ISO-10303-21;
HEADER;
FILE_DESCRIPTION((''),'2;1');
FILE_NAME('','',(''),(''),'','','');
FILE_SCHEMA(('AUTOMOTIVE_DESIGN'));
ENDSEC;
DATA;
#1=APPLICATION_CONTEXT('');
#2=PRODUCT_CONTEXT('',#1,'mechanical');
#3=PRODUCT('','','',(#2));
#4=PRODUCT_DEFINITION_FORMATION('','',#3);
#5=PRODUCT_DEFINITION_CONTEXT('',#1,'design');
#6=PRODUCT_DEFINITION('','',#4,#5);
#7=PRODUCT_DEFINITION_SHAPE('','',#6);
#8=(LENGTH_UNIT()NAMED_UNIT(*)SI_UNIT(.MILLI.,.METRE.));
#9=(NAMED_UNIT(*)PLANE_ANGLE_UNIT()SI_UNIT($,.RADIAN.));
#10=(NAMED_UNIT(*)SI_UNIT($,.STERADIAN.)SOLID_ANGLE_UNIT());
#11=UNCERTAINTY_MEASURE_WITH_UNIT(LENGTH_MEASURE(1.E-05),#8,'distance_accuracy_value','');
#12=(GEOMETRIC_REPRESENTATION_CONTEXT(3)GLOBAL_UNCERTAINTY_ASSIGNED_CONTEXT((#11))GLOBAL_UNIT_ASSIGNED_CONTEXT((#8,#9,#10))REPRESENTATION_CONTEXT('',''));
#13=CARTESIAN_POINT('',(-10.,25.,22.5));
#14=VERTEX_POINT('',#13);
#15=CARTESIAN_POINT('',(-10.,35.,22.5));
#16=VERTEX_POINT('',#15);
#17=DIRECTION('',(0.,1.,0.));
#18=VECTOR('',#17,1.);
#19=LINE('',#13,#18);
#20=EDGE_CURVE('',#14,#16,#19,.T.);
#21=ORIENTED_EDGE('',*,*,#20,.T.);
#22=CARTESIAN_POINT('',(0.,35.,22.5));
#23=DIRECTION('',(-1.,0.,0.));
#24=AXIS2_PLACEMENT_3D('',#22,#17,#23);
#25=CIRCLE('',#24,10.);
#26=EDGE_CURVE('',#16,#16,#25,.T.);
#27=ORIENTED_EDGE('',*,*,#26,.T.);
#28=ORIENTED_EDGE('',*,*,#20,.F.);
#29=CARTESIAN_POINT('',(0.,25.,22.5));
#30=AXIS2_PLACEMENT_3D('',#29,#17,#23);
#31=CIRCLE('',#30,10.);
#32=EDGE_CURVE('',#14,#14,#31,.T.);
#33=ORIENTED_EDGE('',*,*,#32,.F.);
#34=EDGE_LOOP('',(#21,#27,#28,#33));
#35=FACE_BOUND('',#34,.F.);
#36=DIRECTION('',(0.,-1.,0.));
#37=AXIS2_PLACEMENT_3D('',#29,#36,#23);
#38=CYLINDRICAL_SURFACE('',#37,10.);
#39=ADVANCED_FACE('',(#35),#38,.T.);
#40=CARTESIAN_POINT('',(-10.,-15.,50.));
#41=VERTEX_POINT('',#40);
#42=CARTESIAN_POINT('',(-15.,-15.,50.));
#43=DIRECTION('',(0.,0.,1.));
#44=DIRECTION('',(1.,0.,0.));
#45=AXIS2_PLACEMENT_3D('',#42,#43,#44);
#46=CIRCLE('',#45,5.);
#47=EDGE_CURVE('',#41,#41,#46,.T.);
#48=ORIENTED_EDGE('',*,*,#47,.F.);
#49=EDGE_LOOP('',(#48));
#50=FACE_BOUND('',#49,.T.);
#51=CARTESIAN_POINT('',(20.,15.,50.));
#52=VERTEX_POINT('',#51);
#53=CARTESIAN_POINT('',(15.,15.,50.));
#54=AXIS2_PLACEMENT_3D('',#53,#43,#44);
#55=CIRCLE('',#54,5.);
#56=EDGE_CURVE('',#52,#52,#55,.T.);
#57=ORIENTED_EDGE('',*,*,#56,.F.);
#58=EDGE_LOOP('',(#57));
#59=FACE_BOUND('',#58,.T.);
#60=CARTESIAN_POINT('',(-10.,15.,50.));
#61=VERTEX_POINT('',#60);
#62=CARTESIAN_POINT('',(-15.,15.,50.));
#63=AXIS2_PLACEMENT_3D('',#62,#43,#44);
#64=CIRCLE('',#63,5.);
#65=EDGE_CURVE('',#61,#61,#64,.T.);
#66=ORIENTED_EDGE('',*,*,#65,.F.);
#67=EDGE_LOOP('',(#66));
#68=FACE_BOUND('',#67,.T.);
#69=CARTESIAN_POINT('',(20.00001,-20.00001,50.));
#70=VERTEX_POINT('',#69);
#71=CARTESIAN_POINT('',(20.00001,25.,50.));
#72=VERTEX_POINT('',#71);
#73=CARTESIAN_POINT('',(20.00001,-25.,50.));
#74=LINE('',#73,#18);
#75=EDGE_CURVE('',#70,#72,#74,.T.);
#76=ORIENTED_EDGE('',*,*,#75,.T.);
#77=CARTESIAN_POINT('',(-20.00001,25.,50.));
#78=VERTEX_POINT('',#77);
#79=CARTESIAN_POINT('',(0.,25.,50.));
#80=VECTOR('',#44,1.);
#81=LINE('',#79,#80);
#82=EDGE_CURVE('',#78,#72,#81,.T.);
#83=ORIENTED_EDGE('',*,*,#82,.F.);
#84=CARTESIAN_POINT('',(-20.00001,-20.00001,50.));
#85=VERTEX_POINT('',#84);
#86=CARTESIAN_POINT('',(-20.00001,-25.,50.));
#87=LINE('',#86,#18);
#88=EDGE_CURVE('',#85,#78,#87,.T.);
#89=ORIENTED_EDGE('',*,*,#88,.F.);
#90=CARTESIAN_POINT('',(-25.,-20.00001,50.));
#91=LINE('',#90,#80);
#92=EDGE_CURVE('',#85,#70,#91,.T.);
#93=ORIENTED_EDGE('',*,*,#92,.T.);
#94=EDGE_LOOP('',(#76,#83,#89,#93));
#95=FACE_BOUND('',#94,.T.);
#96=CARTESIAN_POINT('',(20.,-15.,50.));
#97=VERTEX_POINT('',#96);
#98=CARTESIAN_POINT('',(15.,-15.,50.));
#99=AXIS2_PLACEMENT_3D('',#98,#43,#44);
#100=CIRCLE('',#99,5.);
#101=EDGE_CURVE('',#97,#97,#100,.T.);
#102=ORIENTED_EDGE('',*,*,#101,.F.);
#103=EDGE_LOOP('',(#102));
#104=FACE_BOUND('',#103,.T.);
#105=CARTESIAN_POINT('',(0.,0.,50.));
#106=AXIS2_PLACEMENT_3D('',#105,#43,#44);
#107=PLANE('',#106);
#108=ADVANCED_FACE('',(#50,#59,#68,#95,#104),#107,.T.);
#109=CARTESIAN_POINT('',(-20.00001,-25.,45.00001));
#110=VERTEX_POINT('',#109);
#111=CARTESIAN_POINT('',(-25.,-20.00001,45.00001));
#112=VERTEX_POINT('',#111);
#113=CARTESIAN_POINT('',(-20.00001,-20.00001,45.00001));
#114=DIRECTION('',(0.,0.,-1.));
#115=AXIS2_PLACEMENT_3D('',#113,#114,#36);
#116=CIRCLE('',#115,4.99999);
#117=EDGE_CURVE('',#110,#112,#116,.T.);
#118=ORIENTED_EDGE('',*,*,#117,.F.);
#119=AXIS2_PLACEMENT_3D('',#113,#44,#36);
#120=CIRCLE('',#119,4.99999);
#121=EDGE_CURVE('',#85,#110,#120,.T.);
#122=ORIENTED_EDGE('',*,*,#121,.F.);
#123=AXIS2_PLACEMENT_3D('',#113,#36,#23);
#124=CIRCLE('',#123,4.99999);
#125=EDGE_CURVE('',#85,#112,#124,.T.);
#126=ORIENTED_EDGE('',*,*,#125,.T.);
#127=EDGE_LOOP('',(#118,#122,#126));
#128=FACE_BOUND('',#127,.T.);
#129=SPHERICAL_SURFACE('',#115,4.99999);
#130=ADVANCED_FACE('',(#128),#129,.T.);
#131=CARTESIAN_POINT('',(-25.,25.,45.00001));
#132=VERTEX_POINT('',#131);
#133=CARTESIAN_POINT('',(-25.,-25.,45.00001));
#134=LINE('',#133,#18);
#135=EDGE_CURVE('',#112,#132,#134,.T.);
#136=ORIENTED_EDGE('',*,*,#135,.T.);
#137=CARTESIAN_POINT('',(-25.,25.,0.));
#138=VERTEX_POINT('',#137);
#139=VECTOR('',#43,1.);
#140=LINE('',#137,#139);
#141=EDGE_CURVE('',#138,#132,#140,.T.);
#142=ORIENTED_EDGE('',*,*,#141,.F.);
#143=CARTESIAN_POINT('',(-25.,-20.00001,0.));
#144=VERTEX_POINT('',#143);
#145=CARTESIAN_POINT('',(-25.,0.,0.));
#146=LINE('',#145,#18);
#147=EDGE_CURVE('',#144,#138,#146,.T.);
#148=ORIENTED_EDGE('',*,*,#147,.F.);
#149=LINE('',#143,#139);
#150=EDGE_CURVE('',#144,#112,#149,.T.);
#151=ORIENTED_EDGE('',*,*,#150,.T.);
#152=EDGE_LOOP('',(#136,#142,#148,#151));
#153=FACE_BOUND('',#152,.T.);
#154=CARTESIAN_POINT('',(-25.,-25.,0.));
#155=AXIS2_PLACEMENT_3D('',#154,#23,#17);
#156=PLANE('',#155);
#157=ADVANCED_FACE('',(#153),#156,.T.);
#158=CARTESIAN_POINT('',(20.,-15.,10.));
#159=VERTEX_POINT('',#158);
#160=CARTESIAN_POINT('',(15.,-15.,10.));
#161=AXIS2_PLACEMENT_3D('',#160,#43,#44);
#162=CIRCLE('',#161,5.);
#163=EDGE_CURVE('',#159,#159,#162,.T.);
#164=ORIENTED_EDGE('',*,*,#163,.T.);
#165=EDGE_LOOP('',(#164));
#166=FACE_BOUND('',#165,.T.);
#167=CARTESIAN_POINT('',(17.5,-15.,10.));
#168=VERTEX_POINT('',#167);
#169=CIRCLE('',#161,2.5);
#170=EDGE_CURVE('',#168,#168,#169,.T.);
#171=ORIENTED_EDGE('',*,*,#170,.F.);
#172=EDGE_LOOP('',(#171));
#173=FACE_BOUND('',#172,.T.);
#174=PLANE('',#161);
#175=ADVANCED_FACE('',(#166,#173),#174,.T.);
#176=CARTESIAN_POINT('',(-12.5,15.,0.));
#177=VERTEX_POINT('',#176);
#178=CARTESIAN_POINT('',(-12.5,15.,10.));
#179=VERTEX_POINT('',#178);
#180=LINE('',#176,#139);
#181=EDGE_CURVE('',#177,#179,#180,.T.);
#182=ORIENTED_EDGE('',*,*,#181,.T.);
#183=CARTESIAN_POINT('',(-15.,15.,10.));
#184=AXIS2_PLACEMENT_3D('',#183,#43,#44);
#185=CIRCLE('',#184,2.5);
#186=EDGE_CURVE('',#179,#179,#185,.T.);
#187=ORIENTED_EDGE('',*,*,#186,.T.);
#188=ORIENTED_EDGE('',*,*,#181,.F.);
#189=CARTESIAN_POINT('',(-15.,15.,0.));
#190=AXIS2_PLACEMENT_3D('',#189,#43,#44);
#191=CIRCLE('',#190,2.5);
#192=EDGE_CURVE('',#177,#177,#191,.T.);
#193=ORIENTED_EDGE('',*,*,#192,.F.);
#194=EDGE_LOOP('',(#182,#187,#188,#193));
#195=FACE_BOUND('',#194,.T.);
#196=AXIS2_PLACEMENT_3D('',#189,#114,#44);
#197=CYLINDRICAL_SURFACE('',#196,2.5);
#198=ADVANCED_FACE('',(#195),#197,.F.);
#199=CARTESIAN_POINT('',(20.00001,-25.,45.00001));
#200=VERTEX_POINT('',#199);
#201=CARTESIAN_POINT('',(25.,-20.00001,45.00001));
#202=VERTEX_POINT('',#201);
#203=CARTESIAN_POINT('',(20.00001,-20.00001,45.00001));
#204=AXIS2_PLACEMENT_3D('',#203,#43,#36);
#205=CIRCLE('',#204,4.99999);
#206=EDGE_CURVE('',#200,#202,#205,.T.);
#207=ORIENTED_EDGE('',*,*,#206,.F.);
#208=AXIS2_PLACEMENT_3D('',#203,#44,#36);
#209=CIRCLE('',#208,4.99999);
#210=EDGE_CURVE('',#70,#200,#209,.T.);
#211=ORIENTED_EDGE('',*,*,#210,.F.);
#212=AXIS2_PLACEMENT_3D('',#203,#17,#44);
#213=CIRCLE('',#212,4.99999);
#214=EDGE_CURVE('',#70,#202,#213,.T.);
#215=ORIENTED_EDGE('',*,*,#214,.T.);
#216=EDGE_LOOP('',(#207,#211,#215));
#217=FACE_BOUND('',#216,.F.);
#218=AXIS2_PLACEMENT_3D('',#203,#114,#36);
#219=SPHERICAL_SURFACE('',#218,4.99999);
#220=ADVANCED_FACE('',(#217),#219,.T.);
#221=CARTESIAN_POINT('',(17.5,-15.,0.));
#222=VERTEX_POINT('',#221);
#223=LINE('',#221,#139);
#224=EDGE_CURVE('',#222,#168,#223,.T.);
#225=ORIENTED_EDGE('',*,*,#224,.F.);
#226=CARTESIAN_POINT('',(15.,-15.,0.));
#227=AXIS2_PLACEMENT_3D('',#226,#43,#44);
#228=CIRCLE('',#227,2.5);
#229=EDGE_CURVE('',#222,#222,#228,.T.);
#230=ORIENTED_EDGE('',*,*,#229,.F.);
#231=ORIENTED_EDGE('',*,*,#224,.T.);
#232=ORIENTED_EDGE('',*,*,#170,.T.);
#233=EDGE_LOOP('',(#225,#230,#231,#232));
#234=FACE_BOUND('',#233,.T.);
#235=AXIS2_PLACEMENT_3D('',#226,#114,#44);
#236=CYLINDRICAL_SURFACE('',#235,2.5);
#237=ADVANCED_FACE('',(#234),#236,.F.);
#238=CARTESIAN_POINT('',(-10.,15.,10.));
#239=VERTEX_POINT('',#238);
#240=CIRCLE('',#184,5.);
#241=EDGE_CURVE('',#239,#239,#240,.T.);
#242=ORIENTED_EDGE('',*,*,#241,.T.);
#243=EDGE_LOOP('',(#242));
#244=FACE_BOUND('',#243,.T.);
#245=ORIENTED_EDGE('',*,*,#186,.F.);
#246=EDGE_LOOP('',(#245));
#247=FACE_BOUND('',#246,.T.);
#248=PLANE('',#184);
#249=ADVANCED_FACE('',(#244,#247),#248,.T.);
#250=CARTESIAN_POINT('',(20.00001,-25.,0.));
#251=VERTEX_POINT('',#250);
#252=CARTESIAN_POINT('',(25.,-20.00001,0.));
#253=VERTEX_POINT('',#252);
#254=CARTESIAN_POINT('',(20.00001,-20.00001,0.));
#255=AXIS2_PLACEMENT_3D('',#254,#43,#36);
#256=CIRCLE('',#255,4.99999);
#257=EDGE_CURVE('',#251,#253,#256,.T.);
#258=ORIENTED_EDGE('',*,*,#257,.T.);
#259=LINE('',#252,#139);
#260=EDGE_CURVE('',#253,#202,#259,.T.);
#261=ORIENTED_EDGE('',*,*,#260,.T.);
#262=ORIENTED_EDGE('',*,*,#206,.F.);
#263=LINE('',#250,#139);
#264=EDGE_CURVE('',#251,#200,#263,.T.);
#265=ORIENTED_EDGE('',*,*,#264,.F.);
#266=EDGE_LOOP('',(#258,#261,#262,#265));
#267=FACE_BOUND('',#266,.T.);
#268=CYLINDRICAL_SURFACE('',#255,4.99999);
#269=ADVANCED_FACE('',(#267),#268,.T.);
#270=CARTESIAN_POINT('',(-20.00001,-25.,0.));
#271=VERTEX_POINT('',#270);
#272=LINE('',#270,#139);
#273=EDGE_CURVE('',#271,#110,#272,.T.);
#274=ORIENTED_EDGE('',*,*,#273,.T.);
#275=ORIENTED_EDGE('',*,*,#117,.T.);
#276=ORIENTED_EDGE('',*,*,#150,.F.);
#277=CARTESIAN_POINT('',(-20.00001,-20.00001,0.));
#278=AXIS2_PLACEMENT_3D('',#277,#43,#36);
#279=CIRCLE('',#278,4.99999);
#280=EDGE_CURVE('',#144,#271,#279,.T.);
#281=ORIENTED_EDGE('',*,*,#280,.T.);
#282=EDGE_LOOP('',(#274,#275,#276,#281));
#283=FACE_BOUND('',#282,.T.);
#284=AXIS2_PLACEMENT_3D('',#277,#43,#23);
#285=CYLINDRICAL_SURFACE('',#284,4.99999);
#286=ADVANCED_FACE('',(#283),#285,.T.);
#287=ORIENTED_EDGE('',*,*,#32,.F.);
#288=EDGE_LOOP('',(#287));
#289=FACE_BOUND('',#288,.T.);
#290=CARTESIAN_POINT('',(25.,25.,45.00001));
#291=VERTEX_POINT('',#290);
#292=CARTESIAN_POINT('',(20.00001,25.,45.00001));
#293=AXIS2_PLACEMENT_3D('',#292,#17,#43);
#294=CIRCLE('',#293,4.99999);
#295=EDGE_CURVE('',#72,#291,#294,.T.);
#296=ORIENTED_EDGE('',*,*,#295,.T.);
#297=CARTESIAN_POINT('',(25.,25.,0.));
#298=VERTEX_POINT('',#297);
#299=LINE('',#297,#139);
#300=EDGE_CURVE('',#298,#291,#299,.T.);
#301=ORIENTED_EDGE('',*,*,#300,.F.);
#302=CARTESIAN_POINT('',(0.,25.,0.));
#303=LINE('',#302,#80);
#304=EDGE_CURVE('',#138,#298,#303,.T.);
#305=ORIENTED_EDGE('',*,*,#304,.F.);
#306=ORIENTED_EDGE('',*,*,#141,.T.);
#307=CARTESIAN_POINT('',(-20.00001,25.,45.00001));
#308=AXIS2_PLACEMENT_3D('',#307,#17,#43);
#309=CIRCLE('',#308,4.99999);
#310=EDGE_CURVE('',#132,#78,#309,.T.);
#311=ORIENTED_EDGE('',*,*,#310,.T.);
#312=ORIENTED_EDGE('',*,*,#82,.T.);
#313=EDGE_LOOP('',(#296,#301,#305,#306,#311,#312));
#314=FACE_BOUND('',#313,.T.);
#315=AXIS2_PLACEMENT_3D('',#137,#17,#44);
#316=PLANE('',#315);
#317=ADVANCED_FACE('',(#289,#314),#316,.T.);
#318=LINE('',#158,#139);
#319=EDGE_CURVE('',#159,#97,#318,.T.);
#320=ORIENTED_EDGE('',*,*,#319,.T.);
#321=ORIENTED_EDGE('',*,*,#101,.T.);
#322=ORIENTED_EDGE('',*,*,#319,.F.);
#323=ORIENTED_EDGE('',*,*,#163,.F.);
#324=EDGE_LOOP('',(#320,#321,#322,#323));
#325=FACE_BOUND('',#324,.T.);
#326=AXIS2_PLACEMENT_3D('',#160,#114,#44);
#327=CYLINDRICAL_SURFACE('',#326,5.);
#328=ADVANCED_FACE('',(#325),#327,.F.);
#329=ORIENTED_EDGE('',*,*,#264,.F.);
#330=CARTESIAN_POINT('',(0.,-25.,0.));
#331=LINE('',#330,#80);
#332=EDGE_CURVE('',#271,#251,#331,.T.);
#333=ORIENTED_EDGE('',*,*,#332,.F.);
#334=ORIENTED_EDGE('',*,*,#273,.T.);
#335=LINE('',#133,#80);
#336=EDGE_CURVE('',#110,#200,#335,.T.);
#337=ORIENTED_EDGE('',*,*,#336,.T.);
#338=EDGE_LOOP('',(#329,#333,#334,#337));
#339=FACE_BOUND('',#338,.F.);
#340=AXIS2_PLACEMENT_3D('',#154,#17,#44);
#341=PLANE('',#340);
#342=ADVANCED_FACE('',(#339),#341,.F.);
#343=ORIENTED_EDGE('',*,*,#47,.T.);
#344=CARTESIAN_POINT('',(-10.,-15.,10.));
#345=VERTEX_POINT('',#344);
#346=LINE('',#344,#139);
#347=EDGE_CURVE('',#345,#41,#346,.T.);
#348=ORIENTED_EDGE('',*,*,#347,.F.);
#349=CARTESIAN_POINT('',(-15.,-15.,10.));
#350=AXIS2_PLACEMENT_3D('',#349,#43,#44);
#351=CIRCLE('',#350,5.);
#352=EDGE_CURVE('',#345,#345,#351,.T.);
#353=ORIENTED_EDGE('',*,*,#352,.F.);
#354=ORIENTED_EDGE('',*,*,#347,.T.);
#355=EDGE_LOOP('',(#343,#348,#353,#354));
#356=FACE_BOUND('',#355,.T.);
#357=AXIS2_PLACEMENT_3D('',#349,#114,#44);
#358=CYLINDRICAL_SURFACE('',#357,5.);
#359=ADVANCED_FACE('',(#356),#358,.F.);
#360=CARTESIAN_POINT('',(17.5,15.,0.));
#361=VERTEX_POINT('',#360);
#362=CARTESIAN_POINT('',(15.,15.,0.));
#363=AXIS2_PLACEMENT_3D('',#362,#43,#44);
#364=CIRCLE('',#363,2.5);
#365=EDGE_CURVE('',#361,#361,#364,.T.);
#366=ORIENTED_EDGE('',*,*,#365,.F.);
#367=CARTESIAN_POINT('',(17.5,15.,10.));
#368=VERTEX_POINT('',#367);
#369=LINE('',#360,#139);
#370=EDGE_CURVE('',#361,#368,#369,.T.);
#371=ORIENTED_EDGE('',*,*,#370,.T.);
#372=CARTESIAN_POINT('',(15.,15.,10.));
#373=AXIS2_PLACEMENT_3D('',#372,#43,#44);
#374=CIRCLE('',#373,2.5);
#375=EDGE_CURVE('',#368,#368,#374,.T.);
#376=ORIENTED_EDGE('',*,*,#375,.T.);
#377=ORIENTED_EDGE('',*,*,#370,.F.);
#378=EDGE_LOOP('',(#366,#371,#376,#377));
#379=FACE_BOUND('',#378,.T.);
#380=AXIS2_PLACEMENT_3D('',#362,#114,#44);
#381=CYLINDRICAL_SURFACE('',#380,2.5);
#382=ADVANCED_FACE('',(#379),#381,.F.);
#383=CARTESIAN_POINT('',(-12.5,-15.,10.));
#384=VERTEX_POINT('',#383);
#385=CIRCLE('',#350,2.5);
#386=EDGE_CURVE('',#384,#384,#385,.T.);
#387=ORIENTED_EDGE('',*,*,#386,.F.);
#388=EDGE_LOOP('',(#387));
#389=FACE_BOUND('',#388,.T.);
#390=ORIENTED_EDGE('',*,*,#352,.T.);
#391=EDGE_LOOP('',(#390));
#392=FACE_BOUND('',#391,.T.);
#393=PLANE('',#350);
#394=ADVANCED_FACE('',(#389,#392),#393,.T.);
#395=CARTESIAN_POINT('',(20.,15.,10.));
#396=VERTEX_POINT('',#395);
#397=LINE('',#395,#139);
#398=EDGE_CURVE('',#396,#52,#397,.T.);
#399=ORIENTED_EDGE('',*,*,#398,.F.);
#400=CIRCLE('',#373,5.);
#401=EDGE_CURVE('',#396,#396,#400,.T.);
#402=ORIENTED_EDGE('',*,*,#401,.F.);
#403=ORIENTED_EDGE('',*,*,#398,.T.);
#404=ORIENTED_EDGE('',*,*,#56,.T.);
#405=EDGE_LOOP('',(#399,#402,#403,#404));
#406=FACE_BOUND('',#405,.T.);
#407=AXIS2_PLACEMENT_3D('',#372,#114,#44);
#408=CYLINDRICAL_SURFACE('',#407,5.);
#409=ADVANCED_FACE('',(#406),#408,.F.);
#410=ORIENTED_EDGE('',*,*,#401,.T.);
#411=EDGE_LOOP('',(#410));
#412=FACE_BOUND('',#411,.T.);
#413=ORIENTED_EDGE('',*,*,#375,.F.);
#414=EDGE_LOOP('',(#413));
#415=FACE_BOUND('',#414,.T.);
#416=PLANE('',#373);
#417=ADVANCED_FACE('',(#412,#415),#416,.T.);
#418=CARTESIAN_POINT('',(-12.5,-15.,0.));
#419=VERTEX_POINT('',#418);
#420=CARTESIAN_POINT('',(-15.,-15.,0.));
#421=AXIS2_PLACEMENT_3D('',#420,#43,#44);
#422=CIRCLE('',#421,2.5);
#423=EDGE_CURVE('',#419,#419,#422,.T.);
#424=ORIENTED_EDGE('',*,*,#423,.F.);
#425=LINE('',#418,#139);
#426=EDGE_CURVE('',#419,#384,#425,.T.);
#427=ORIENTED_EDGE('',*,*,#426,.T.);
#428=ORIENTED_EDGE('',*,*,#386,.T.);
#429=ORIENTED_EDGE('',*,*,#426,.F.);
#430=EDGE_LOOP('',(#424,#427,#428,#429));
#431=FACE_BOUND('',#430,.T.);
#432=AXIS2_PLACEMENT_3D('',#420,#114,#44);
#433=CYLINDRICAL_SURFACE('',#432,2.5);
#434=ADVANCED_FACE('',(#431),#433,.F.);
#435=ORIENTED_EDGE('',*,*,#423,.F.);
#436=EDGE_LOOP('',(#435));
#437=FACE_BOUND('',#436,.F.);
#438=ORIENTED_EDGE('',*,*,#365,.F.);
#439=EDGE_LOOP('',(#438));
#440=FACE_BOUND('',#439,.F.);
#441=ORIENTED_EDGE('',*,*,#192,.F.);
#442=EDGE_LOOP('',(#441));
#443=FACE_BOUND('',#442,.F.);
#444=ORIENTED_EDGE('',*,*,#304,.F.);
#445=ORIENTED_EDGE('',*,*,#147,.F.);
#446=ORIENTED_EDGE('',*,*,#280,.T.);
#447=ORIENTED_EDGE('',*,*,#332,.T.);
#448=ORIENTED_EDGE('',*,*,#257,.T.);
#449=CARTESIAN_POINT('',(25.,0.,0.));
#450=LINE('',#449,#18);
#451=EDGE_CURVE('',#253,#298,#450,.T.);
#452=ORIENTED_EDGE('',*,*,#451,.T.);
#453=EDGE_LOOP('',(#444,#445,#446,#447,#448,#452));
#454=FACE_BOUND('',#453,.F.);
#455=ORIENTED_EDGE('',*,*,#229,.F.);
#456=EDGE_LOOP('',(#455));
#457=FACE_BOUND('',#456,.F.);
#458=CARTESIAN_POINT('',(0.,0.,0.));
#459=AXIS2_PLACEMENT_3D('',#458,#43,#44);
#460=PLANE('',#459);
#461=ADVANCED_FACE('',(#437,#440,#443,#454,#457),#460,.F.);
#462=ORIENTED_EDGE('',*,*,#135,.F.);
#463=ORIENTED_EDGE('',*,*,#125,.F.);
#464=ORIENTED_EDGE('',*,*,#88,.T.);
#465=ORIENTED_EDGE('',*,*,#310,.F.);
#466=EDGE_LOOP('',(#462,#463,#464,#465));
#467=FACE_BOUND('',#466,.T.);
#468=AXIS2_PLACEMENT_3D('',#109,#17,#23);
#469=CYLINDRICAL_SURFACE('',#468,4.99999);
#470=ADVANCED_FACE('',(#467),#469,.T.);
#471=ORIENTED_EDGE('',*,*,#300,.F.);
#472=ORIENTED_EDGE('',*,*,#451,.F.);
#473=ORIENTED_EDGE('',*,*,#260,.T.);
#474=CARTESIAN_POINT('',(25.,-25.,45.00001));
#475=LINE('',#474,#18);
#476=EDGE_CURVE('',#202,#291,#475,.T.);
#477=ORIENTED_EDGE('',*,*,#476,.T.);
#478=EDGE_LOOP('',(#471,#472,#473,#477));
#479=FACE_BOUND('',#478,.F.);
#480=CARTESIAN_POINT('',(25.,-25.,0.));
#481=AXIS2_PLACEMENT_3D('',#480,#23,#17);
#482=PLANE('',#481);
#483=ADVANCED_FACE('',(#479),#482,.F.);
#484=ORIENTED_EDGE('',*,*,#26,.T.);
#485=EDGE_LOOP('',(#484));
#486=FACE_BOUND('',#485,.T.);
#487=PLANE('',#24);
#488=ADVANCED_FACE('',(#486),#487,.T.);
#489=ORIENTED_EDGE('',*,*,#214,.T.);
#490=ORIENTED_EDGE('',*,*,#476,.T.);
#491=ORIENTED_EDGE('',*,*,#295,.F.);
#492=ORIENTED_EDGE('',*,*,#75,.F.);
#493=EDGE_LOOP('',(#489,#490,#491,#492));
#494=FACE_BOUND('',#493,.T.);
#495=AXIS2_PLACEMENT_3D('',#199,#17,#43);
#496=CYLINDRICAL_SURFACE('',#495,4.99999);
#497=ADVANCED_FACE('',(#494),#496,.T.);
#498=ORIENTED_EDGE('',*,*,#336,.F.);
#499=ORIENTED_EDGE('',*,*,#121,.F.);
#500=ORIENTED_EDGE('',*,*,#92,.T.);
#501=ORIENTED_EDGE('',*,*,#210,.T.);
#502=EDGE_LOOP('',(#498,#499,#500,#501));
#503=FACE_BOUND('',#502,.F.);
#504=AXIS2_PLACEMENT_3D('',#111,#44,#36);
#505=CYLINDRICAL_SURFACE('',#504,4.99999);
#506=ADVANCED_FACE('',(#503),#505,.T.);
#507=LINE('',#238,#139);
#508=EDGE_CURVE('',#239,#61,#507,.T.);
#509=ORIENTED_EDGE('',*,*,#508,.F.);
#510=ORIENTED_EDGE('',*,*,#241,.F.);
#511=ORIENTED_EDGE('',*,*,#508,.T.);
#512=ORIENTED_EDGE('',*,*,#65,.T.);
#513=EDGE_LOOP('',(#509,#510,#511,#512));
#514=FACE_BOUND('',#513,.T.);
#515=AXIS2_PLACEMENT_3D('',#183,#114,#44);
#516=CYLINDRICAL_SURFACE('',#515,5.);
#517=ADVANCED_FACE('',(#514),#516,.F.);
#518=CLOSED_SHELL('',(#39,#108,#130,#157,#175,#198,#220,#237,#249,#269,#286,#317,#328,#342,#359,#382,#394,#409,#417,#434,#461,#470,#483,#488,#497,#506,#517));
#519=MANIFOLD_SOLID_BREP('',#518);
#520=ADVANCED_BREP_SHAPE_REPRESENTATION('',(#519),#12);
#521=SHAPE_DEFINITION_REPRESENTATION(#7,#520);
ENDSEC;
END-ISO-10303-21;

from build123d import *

# Parameters (mm, degrees)
F0_W     = 50
F0_H     = 50
F0_R     = 5
F0_R_2   = 2.5
F1_DEPTH = 50
F2_START = 10
F2_DEPTH = 40
F3_R     = 4.99999
F4_R     = 10
F5_DEPTH = 10


# Not quite as in the source:
# - a fillet or chamfer is up to 0.001 mm smaller than in the source, because OpenCascade refuses the exact size


with BuildPart() as f1:
    # F0 (on Top) → F1 (new body)
    with BuildSketch(Plane.XY):
        Rectangle(F0_W, F0_H)
        with Locations((-15, -15)):
            Circle(F0_R, mode=Mode.SUBTRACT)
        with Locations((15, -15)):
            Circle(F0_R, mode=Mode.SUBTRACT)
        with Locations((-15, 15)):
            Circle(F0_R, mode=Mode.SUBTRACT)
        with Locations((15, 15)):
            Circle(F0_R, mode=Mode.SUBTRACT)
        with Locations((-15, -15)):
            Circle(F0_R)
        with Locations((-15, -15)):
            Circle(F0_R_2, mode=Mode.SUBTRACT)
        with Locations((-15, 15)):
            Circle(F0_R)
        with Locations((-15, 15)):
            Circle(F0_R_2, mode=Mode.SUBTRACT)
        with Locations((15, 15)):
            Circle(F0_R)
        with Locations((15, 15)):
            Circle(F0_R_2, mode=Mode.SUBTRACT)
        with Locations((15, -15)):
            Circle(F0_R)
        with Locations((15, -15)):
            Circle(F0_R_2, mode=Mode.SUBTRACT)
    extrude(amount=F1_DEPTH)

    # F0 (on Top) → F2 (cut)
    with BuildSketch(Plane.XY.offset(F2_START)):
        with Locations((-15, -15)):
            Circle(F0_R)
        with Locations((-15, -15)):
            Circle(F0_R_2, mode=Mode.SUBTRACT)
        with Locations((-15, 15)):
            Circle(F0_R)
        with Locations((-15, 15)):
            Circle(F0_R_2, mode=Mode.SUBTRACT)
        with Locations((15, -15)):
            Circle(F0_R)
        with Locations((15, -15)):
            Circle(F0_R_2, mode=Mode.SUBTRACT)
        with Locations((15, 15)):
            Circle(F0_R)
        with Locations((15, 15)):
            Circle(F0_R_2, mode=Mode.SUBTRACT)
    extrude(amount=F2_DEPTH, mode=Mode.SUBTRACT)

    # F3 (radius 5 in the source; OpenCascade refuses exactly that, so slightly less here)
    f3_edges = [f1.edges().sort_by_distance(p)[0] for p in [
        (-25, -25, 25),
        (25, -25, 25),
        (0, -25, 50),
        (-25, 0, 50),
        (25, 0, 50),
    ]]
    fillet(f3_edges, radius=F3_R)

    # F4 (on face) → F5 (join)
    with BuildSketch(Plane(origin=(0, 25, 0), x_dir=(-1, 0, 0), z_dir=(0, 1, 0))):
        with Locations((0, 22.5)):
            Circle(F4_R)
    extrude(amount=F5_DEPTH)


solid = f1.part
